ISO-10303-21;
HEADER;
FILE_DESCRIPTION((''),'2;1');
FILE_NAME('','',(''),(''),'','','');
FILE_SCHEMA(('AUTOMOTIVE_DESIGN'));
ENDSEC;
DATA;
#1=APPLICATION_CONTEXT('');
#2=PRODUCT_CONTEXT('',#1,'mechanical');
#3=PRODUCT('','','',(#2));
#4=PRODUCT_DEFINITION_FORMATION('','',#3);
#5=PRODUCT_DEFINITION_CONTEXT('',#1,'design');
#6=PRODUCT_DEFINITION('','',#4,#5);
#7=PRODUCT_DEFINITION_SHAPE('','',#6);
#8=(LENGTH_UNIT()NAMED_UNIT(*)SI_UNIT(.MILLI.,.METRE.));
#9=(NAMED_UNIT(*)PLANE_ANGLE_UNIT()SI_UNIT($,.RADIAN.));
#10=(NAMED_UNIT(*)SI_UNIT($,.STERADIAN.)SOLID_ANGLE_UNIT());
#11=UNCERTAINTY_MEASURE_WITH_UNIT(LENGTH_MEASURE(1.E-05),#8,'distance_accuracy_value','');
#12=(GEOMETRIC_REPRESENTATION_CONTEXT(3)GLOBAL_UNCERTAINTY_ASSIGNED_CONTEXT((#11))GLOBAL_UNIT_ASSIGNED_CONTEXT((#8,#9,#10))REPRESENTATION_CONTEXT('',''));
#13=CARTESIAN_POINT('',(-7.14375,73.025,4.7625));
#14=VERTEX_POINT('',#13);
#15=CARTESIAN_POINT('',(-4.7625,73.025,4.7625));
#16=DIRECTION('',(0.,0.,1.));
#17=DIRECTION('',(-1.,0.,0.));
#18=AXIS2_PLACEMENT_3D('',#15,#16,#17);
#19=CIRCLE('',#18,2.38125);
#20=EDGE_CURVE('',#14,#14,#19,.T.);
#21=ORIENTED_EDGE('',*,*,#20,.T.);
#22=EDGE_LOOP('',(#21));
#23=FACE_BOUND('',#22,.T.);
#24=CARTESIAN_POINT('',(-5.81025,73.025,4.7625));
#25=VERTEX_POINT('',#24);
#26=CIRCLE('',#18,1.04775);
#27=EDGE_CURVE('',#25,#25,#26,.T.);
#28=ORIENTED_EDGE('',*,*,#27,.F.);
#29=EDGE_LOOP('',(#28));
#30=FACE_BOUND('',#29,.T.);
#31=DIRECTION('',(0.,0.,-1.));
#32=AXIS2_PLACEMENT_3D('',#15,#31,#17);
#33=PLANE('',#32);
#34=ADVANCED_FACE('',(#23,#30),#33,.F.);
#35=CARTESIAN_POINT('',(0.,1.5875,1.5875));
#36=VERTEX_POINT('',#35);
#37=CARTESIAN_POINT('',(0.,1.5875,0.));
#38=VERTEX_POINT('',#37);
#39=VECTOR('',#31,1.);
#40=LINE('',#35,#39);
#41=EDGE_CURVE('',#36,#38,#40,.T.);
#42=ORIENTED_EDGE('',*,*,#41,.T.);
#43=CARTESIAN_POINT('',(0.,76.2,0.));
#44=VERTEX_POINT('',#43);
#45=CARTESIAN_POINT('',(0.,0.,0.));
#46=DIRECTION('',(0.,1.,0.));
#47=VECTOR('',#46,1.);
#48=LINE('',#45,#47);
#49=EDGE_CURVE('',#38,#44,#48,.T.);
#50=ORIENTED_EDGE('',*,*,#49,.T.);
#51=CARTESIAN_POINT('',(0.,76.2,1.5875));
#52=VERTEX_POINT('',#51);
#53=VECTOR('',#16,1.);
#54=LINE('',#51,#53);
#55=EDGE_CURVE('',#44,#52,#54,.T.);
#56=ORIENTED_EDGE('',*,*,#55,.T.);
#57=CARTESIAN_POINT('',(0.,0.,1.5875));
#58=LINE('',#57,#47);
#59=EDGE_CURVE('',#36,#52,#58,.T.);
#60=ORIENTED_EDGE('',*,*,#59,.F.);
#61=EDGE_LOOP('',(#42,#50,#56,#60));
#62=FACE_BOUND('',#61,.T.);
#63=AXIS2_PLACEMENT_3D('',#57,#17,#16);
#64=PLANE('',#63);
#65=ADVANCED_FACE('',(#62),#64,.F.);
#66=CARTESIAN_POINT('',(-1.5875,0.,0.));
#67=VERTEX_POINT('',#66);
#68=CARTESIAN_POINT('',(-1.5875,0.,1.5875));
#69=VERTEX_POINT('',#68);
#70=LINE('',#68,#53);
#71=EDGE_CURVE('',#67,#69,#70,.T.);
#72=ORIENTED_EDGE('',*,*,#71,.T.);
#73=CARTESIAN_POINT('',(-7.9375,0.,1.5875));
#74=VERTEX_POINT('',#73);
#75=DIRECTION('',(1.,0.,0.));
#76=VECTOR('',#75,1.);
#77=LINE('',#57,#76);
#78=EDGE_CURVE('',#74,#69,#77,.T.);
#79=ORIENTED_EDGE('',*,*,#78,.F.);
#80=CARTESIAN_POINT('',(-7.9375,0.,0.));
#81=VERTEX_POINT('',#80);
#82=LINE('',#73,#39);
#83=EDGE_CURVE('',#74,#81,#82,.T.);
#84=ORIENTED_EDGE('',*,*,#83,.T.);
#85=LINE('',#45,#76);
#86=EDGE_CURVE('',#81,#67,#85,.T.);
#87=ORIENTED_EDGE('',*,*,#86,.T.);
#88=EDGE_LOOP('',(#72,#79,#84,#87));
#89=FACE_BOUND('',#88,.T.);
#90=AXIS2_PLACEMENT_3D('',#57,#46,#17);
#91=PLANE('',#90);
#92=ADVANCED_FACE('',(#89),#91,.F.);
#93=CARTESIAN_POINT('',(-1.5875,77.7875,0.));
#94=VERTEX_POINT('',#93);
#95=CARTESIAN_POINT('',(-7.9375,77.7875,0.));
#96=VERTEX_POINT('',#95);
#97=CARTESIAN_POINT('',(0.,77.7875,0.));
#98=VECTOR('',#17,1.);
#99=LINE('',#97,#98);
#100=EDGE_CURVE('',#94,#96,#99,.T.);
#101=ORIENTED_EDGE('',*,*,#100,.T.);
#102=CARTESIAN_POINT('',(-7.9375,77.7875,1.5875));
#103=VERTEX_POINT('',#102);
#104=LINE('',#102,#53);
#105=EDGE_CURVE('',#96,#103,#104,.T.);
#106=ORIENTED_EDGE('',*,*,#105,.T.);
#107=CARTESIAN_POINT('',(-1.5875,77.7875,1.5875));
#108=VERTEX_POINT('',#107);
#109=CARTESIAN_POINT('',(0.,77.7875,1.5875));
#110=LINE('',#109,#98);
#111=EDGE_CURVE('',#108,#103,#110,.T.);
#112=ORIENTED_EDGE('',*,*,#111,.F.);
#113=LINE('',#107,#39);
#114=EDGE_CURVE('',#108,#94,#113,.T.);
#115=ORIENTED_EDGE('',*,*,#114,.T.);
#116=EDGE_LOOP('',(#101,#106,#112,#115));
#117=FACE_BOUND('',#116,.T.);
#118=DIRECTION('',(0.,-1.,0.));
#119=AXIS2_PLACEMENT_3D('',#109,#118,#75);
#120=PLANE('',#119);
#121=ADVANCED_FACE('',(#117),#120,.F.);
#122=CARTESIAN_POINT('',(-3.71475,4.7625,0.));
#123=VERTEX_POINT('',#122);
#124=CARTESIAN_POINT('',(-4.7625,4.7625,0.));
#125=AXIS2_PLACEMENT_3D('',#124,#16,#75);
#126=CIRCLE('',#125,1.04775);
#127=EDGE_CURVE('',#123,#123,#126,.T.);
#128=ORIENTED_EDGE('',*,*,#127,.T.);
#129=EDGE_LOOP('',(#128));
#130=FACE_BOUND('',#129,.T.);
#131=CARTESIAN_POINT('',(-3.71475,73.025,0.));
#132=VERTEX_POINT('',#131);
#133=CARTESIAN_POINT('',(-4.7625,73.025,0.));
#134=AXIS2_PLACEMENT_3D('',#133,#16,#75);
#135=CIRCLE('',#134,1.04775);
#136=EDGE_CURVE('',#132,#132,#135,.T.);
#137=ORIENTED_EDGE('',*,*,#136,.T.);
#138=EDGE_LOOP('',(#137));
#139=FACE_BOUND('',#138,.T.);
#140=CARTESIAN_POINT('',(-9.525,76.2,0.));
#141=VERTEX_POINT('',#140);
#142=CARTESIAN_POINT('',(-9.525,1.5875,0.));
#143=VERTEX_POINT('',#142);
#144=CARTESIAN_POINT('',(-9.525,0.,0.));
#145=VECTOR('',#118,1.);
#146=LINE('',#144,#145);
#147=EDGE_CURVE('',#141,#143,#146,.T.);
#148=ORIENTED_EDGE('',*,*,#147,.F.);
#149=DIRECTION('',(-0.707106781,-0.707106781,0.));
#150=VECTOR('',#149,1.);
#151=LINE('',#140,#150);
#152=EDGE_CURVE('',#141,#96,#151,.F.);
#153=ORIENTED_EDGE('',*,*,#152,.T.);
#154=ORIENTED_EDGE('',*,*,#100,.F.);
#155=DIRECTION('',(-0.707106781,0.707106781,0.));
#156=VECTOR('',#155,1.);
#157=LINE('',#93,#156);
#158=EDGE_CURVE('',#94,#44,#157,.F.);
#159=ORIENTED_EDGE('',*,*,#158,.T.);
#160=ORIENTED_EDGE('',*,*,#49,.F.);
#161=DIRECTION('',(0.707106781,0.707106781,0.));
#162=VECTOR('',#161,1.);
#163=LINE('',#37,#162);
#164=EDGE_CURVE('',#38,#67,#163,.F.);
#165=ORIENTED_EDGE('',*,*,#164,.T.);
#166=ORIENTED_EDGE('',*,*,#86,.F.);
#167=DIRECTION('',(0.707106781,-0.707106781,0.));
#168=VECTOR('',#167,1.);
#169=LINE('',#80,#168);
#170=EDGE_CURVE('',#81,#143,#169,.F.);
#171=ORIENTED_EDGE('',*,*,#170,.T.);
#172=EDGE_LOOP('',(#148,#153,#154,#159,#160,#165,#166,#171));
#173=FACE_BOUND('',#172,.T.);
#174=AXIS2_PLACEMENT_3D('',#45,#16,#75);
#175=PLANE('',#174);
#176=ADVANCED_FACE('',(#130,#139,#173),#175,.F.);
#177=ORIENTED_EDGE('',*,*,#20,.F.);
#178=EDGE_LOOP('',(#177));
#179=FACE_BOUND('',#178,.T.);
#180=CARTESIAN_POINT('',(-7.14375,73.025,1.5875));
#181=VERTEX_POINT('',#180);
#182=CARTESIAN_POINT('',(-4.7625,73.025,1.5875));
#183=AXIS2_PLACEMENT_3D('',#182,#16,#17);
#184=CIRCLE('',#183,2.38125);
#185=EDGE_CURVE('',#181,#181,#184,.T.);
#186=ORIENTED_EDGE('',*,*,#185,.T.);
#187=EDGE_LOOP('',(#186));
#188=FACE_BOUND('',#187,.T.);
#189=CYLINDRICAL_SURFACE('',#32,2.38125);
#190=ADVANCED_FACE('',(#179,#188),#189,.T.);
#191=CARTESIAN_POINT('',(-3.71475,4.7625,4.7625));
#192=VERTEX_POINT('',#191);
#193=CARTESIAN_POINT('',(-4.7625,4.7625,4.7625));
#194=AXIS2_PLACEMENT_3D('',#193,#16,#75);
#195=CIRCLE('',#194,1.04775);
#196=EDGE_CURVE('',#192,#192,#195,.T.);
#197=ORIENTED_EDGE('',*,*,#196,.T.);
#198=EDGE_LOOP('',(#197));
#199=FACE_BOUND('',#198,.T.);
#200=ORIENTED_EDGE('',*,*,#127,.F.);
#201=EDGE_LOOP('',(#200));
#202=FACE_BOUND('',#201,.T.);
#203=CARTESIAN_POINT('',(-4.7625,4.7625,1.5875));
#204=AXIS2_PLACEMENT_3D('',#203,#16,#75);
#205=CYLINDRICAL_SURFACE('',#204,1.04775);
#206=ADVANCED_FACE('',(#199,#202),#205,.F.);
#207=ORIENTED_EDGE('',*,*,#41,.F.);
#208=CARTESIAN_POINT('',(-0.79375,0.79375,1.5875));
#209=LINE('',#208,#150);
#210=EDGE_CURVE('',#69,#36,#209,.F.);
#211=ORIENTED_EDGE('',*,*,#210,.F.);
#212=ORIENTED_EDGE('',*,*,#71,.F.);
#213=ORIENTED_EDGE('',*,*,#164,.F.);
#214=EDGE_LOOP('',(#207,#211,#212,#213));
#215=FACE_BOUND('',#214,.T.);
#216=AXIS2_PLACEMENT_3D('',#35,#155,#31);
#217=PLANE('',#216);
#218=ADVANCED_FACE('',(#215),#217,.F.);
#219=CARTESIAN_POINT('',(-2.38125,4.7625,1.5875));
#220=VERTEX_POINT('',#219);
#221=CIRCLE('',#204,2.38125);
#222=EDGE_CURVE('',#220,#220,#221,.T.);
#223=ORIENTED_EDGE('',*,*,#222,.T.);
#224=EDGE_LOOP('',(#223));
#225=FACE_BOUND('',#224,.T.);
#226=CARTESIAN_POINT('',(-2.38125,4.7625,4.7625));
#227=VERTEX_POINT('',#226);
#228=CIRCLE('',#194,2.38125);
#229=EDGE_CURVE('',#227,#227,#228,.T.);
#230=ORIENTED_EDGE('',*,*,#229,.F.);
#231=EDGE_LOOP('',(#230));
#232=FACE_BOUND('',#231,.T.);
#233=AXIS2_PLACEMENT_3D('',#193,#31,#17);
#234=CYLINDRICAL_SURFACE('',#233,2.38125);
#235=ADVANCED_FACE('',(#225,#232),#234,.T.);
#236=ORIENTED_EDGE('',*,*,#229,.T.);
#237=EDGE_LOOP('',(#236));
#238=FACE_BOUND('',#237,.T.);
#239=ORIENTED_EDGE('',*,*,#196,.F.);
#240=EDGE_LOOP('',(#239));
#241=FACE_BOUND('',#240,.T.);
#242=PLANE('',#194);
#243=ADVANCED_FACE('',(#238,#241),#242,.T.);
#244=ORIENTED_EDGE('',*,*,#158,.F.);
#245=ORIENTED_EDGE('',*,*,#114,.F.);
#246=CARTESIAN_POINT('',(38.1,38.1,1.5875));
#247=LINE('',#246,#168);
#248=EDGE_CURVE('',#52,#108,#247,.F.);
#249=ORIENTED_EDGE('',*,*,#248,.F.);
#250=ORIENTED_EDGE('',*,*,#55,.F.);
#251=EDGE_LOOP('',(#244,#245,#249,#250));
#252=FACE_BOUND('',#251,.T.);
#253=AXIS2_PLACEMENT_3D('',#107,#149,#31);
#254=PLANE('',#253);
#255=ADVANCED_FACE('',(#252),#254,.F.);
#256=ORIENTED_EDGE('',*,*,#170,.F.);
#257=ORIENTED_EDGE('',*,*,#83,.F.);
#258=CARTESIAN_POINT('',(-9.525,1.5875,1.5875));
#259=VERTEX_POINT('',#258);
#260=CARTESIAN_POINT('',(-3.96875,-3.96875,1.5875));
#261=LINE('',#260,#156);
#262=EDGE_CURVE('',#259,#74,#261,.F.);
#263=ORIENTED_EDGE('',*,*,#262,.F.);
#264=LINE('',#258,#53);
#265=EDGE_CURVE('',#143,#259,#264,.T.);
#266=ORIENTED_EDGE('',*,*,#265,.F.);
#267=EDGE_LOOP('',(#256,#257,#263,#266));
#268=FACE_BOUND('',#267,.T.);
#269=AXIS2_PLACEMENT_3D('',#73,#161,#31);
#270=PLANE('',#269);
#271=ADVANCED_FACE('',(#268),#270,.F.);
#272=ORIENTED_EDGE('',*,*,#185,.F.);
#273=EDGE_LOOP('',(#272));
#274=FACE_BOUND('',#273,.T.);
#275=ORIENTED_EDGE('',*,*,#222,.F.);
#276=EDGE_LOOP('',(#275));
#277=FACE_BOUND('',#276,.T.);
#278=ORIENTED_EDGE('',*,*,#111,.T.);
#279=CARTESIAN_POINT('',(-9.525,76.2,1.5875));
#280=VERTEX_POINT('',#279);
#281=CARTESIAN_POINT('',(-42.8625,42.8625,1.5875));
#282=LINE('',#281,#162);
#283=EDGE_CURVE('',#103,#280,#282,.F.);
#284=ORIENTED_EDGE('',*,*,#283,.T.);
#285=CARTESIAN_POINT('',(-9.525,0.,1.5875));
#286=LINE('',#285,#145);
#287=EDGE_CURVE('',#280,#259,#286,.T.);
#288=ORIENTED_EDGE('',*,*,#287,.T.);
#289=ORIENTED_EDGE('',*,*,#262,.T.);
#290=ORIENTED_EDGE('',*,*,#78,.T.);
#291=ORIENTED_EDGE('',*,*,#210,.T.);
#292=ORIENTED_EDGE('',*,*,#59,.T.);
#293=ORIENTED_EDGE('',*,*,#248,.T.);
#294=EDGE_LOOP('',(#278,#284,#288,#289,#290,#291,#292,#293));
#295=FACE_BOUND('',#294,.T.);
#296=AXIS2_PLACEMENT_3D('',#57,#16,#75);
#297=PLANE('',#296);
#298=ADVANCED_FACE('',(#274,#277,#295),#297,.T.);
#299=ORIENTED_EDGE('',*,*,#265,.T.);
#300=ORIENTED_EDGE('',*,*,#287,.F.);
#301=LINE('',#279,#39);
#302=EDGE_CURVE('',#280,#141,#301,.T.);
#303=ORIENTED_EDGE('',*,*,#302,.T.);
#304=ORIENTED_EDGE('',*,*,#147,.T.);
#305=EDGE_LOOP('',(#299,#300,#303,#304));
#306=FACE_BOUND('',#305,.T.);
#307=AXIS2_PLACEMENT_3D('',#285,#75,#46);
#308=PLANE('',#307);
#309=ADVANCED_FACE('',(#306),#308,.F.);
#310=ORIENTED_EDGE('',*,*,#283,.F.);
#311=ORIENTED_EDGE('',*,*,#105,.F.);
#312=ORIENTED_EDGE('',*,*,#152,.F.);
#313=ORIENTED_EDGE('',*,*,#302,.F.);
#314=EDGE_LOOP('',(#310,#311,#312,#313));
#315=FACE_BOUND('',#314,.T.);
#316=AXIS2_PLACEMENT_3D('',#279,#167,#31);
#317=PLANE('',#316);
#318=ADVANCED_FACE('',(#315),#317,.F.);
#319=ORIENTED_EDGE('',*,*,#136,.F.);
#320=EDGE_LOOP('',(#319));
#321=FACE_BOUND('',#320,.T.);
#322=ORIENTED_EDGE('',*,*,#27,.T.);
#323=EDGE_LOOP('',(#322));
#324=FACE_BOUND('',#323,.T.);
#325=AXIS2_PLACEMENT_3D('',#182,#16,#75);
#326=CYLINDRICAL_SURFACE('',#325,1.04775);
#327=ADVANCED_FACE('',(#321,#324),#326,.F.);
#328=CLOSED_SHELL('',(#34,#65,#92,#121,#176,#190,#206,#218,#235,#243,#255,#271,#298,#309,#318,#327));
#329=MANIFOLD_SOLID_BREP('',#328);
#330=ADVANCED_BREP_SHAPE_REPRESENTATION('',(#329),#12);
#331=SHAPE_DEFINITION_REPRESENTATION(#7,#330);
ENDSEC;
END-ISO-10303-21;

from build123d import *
from build123d.topology import SkipClean

# Parameters (mm, degrees)
SKETCH1_W                    = 9.525
SKETCH1_H                    = 77.7875
BOSS_EXTRUDE1_DEPTH          = 1.5875
CHAMFER2_SIZE                = 1.5875
F_97_0_0825_DIAMETER_HOLE1_D = 2.0955
SKETCH5_R                    = 2.38125
SKETCH5_R_2                  = 1.04775
BOSS_EXTRUDE2_DEPTH          = 3.175


with BuildPart() as part:
    # Sketch1 → Boss-Extrude1 (new body)
    with BuildSketch(Plane.XY):
        with Locations((-4.7625, 38.89375)):
            Rectangle(SKETCH1_W, SKETCH1_H)
    extrude(amount=BOSS_EXTRUDE1_DEPTH)

    # Chamfer2
    chamfer2_edges = [part.edges().sort_by_distance(p)[0] for p in [
        (0, 77.7875, 0.79375),
        (-9.525, 77.7875, 0.79375),
        (0, 0, 0.79375),
        (-9.525, 0, 0.79375),
    ]]
    chamfer(chamfer2_edges, length=CHAMFER2_SIZE)

    # #97 (0.0825) Diameter Hole1 (through all)
    with Locations(Plane.XY.offset(1.5875)):
        with Locations((-4.7625, 4.7625), (-4.7625, 73.025)):
            Hole(F_97_0_0825_DIAMETER_HOLE1_D / 2)

    # Sketch5 → Boss-Extrude2 (add)
    # profile 1 of 2: a face of its own
    with SkipClean():  # the faces are left unmerged after this step: merging them gives an invalid solid
        with BuildSketch(Plane.XY.offset(1.5875)):
            with Locations((-4.7625, 4.7625)):
                Circle(SKETCH5_R)
            with Locations((-4.7625, 4.7625)):
                Circle(SKETCH5_R_2, mode=Mode.SUBTRACT)
        # profile 2 of 2: a face of its own
        with BuildSketch(Plane.XY.offset(1.5875)):
            with Locations((-4.7625, 73.025)):
                Circle(SKETCH5_R)
            with Locations((-4.7625, 73.025)):
                Circle(SKETCH5_R_2, mode=Mode.SUBTRACT)
        extrude(amount=BOSS_EXTRUDE2_DEPTH)
    add(part.part.scale(1), mode=Mode.REPLACE)  # the faces are merged on a copy


solid = part.part
